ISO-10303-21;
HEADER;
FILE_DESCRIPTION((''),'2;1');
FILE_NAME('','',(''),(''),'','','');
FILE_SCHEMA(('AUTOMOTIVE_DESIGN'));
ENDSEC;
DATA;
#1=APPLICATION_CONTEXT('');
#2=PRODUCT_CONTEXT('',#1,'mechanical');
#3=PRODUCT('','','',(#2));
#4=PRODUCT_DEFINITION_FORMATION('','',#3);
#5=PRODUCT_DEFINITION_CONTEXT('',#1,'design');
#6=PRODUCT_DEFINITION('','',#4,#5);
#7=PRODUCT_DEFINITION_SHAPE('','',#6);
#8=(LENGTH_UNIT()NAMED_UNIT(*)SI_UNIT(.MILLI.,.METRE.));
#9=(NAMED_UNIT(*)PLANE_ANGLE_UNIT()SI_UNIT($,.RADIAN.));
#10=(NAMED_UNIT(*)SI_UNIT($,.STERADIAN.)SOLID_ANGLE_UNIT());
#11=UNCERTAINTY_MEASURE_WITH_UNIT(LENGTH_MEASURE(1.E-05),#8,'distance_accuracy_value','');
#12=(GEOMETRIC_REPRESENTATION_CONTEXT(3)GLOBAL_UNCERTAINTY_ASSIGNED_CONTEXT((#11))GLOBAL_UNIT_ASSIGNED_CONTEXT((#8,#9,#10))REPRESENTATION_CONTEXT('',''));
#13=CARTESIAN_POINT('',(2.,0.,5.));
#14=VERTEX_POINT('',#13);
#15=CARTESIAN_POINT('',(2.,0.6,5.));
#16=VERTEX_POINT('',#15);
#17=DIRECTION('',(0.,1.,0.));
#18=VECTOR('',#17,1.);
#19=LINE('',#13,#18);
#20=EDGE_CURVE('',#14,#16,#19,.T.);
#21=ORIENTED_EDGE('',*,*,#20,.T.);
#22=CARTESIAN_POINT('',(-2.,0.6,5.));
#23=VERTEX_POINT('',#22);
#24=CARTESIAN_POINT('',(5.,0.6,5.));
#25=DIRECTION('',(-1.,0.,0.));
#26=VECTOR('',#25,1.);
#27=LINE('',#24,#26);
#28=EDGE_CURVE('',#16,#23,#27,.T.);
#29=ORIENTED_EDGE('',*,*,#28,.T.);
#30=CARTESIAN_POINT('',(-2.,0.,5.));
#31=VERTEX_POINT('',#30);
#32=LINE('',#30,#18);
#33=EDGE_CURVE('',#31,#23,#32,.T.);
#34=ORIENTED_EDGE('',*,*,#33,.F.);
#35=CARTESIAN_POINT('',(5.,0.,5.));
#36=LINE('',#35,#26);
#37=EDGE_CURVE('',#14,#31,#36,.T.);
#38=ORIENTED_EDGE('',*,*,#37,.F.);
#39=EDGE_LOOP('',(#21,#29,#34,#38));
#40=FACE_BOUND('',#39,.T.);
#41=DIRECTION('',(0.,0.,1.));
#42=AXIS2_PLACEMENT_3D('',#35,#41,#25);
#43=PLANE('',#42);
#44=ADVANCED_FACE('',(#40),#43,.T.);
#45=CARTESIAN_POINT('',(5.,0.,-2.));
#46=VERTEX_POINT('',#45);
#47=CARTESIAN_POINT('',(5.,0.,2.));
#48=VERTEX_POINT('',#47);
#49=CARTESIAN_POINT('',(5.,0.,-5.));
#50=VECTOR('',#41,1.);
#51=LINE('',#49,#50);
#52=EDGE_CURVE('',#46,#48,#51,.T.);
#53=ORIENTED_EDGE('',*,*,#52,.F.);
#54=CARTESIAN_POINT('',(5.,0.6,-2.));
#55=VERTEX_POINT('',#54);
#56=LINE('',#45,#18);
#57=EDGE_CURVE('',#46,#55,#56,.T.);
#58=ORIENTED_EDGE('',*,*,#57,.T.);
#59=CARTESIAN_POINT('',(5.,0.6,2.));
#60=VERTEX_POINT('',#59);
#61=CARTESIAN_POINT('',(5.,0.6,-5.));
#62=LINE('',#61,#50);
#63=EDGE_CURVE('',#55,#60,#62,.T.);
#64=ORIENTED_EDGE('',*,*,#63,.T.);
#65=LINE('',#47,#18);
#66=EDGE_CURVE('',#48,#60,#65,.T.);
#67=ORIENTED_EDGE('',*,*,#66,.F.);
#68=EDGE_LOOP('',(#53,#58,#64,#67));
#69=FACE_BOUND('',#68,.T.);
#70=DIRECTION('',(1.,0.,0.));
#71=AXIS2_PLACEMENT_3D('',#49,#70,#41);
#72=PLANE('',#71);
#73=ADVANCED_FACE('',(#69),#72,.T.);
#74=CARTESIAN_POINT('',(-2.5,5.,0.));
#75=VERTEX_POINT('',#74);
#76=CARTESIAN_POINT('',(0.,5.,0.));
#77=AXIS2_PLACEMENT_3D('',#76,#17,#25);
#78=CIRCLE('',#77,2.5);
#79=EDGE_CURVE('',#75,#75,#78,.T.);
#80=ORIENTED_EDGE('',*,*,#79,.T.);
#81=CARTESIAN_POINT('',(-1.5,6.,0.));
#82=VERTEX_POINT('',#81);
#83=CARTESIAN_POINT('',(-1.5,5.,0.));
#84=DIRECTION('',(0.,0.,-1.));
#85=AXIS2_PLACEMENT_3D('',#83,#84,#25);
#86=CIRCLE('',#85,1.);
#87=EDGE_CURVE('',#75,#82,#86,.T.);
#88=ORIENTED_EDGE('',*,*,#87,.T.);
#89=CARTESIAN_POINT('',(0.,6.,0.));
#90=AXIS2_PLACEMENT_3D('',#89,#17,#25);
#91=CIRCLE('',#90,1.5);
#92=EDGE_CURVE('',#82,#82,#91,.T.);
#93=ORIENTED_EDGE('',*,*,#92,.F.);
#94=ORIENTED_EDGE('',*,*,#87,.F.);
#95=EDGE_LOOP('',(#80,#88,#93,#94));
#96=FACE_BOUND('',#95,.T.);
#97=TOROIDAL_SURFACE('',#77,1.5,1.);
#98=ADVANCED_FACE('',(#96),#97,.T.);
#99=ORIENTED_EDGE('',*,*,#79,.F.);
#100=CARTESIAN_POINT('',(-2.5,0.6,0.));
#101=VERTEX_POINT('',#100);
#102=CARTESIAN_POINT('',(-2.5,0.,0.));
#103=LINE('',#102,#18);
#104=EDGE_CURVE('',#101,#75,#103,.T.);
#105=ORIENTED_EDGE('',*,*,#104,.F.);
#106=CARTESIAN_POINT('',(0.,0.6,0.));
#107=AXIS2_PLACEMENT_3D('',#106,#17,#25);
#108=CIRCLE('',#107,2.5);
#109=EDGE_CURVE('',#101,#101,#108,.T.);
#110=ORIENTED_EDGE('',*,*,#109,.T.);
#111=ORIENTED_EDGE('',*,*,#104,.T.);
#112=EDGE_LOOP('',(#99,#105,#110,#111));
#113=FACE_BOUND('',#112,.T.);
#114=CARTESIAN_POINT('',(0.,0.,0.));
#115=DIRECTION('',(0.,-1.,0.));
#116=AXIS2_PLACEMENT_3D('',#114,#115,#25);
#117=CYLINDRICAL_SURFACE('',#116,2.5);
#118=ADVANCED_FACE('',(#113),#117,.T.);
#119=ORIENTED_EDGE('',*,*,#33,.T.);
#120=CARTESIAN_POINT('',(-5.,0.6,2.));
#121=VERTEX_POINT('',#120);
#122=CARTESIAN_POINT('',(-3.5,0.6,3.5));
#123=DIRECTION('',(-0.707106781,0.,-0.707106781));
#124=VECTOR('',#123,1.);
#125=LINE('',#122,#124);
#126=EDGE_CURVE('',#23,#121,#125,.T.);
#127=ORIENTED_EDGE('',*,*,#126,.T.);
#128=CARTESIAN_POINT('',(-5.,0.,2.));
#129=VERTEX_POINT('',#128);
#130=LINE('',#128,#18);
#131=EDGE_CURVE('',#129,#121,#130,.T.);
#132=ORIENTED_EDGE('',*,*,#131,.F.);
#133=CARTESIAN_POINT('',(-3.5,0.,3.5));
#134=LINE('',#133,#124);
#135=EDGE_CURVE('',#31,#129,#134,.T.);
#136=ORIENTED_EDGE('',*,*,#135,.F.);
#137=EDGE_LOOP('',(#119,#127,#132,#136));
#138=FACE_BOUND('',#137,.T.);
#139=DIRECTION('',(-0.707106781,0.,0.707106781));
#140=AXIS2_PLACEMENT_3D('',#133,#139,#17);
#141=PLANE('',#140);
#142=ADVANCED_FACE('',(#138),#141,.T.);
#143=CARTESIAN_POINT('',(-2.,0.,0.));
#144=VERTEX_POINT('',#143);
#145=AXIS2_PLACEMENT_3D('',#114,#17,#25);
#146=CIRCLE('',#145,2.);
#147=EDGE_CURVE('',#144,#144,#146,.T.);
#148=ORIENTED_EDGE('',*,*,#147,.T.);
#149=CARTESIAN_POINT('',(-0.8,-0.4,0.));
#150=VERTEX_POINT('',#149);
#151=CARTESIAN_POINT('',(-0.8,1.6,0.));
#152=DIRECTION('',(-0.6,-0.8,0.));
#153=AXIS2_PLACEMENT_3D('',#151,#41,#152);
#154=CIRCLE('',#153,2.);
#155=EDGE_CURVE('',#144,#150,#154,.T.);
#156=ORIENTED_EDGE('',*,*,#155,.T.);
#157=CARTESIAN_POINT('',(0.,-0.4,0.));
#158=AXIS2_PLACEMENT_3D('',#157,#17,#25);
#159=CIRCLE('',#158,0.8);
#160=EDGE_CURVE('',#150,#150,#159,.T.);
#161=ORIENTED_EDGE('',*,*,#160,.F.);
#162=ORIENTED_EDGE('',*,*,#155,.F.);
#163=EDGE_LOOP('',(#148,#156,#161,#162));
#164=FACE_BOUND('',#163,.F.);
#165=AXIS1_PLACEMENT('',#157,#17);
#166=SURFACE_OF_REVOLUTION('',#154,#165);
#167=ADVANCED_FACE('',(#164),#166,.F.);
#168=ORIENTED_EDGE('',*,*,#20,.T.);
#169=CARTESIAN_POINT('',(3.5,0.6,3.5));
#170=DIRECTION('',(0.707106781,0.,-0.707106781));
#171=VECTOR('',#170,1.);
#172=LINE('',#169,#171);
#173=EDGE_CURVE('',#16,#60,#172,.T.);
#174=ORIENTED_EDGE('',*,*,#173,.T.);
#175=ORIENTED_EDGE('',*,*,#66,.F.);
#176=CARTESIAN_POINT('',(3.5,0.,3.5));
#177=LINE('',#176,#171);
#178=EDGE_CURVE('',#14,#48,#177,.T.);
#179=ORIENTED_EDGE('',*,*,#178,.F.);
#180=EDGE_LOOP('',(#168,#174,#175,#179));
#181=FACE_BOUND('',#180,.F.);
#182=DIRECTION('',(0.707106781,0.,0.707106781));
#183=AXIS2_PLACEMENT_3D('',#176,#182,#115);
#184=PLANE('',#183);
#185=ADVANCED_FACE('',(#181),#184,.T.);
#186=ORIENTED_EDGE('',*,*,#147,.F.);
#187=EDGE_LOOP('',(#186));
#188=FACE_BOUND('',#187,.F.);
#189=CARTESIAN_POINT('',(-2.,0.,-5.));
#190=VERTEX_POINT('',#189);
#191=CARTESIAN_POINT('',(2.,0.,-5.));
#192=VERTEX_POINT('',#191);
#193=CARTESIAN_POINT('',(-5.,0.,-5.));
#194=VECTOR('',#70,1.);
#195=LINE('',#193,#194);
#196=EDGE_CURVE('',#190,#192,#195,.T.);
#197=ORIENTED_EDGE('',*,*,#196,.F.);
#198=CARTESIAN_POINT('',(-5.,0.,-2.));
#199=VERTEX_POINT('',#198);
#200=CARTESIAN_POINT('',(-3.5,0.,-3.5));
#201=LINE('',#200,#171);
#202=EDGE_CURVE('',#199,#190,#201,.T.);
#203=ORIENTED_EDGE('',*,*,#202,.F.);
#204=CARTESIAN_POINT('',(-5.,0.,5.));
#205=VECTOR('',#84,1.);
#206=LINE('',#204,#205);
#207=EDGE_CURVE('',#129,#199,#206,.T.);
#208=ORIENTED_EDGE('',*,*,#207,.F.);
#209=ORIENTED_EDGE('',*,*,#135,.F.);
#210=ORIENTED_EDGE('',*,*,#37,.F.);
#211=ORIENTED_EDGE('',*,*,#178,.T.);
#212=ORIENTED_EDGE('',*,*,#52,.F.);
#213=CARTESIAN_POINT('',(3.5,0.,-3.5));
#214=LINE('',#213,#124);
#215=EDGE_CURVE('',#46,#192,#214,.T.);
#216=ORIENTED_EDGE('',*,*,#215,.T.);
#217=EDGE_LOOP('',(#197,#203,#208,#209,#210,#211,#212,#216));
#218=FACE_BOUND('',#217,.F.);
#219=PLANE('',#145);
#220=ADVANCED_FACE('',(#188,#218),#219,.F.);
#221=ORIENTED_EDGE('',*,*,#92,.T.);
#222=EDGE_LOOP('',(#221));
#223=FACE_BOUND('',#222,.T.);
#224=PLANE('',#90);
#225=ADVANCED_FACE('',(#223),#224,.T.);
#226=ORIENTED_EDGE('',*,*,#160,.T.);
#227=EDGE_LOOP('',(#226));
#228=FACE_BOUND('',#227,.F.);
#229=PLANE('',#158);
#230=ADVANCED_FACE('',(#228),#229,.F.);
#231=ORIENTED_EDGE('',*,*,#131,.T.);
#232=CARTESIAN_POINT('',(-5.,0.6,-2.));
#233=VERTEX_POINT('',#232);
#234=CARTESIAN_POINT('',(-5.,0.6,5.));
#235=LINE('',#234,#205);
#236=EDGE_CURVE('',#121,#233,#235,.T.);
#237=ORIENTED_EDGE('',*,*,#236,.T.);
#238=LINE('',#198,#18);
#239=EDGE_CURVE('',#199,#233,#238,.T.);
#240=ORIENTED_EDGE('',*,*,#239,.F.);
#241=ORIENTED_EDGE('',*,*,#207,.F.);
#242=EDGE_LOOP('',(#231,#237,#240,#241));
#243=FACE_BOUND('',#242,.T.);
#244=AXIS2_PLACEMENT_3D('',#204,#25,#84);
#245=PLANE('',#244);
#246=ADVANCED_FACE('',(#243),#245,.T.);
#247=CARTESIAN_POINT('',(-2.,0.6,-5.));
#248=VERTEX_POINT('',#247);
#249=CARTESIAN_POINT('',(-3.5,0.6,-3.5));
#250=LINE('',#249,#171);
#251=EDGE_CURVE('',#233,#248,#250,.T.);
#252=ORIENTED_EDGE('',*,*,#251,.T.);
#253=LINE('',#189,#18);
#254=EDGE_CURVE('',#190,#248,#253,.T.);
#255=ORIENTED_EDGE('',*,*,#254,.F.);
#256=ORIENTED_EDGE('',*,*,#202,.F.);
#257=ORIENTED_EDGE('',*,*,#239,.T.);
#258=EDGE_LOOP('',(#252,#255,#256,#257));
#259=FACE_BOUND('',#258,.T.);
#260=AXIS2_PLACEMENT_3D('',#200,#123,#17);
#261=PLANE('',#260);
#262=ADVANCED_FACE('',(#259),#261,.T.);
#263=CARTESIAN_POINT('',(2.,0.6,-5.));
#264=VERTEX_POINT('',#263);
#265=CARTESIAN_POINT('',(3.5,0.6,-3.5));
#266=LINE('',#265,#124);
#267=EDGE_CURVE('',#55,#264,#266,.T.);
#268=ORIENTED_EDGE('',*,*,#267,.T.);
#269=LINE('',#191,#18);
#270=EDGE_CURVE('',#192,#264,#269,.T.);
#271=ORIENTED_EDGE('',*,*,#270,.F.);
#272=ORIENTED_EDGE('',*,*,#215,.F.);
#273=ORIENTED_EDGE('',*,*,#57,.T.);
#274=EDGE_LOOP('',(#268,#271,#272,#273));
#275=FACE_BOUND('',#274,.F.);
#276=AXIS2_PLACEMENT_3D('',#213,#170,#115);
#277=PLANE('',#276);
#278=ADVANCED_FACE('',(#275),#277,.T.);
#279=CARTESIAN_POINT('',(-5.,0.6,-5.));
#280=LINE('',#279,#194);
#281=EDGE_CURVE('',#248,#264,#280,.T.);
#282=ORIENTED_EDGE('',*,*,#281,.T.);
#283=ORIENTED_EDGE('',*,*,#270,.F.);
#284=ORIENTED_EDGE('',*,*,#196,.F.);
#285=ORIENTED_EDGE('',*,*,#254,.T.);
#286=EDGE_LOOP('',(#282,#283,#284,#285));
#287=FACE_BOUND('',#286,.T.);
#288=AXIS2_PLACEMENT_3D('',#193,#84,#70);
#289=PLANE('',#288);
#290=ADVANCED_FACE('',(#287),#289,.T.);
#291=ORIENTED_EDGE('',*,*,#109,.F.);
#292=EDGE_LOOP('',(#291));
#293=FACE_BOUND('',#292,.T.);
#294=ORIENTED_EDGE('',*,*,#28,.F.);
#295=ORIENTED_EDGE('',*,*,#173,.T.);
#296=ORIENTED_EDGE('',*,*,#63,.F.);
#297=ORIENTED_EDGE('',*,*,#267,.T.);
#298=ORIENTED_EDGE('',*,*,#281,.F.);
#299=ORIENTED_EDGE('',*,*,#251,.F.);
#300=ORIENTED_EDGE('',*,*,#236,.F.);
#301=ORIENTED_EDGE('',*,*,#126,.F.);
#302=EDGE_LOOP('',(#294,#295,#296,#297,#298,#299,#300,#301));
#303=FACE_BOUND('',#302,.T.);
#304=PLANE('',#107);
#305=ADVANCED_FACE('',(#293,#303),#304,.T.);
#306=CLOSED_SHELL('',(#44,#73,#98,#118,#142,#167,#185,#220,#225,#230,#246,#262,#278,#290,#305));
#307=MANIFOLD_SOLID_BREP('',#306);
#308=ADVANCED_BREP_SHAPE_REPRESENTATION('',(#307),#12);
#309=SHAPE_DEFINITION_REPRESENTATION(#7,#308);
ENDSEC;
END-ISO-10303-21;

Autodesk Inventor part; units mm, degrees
ref_plane "YZ Plane" through (0, 0, 0) normal (1, 0, 0) x (0, 1, 0)
ref_plane "XZ Plane" through (0, 0, 0) normal (0, 1, 0) x (-1, 0, 0)
ref_plane "XY Plane" through (0, 0, 0) normal (0, 0, 1) x (1, 0, 0)
sketch "Szkic1" plane through (0, 0, 0) normal (0, 1, 0) x (-1, 0, 0)
  circle A0 centre (0, 0) radius 2.5
  line L0 (-5, 5) -> (5, 5)
  line L1 (5, 5) -> (5, -5)
  line L2 (5, -5) -> (-5, -5)
  line L3 (-5, -5) -> (-5, 5)
  line L4 (-5, 5) -> (5, -5) construction
  line L5 (5, 5) -> (-5, -5) construction
  circle A1 centre (0, 0) radius 2
  dimension "d0" = 5
  dimension "d1" = 10
  dimension "d2" = 10
  dimension "d7" = 4
extrude "Wyciągnięcie proste1" add sketch "Szkic1" along normal blind 0.6 contours L0 L1 L2 L3
extrude "Wyciągnięcie proste2" add sketch "Szkic1" along normal blind 6 contours A0 | A1
extrude "Wyciągnięcie proste3" add sketch "Szkic1" against normal blind 0.4 contours A1
fillet "Zaokrąglenie1" radius 2 1 edges at (2, -0.4, 0)
chamfer "Faza1" distance 3 angle 45 4 edges at (-5, 0.3, 5) (5, 0.3, 5) (5, 0.3, -5) (-5, 0.3, -5)
fillet "Zaokrąglenie2" radius 1 1 edges at (2.5, 6, 0)
properties part number "button"
